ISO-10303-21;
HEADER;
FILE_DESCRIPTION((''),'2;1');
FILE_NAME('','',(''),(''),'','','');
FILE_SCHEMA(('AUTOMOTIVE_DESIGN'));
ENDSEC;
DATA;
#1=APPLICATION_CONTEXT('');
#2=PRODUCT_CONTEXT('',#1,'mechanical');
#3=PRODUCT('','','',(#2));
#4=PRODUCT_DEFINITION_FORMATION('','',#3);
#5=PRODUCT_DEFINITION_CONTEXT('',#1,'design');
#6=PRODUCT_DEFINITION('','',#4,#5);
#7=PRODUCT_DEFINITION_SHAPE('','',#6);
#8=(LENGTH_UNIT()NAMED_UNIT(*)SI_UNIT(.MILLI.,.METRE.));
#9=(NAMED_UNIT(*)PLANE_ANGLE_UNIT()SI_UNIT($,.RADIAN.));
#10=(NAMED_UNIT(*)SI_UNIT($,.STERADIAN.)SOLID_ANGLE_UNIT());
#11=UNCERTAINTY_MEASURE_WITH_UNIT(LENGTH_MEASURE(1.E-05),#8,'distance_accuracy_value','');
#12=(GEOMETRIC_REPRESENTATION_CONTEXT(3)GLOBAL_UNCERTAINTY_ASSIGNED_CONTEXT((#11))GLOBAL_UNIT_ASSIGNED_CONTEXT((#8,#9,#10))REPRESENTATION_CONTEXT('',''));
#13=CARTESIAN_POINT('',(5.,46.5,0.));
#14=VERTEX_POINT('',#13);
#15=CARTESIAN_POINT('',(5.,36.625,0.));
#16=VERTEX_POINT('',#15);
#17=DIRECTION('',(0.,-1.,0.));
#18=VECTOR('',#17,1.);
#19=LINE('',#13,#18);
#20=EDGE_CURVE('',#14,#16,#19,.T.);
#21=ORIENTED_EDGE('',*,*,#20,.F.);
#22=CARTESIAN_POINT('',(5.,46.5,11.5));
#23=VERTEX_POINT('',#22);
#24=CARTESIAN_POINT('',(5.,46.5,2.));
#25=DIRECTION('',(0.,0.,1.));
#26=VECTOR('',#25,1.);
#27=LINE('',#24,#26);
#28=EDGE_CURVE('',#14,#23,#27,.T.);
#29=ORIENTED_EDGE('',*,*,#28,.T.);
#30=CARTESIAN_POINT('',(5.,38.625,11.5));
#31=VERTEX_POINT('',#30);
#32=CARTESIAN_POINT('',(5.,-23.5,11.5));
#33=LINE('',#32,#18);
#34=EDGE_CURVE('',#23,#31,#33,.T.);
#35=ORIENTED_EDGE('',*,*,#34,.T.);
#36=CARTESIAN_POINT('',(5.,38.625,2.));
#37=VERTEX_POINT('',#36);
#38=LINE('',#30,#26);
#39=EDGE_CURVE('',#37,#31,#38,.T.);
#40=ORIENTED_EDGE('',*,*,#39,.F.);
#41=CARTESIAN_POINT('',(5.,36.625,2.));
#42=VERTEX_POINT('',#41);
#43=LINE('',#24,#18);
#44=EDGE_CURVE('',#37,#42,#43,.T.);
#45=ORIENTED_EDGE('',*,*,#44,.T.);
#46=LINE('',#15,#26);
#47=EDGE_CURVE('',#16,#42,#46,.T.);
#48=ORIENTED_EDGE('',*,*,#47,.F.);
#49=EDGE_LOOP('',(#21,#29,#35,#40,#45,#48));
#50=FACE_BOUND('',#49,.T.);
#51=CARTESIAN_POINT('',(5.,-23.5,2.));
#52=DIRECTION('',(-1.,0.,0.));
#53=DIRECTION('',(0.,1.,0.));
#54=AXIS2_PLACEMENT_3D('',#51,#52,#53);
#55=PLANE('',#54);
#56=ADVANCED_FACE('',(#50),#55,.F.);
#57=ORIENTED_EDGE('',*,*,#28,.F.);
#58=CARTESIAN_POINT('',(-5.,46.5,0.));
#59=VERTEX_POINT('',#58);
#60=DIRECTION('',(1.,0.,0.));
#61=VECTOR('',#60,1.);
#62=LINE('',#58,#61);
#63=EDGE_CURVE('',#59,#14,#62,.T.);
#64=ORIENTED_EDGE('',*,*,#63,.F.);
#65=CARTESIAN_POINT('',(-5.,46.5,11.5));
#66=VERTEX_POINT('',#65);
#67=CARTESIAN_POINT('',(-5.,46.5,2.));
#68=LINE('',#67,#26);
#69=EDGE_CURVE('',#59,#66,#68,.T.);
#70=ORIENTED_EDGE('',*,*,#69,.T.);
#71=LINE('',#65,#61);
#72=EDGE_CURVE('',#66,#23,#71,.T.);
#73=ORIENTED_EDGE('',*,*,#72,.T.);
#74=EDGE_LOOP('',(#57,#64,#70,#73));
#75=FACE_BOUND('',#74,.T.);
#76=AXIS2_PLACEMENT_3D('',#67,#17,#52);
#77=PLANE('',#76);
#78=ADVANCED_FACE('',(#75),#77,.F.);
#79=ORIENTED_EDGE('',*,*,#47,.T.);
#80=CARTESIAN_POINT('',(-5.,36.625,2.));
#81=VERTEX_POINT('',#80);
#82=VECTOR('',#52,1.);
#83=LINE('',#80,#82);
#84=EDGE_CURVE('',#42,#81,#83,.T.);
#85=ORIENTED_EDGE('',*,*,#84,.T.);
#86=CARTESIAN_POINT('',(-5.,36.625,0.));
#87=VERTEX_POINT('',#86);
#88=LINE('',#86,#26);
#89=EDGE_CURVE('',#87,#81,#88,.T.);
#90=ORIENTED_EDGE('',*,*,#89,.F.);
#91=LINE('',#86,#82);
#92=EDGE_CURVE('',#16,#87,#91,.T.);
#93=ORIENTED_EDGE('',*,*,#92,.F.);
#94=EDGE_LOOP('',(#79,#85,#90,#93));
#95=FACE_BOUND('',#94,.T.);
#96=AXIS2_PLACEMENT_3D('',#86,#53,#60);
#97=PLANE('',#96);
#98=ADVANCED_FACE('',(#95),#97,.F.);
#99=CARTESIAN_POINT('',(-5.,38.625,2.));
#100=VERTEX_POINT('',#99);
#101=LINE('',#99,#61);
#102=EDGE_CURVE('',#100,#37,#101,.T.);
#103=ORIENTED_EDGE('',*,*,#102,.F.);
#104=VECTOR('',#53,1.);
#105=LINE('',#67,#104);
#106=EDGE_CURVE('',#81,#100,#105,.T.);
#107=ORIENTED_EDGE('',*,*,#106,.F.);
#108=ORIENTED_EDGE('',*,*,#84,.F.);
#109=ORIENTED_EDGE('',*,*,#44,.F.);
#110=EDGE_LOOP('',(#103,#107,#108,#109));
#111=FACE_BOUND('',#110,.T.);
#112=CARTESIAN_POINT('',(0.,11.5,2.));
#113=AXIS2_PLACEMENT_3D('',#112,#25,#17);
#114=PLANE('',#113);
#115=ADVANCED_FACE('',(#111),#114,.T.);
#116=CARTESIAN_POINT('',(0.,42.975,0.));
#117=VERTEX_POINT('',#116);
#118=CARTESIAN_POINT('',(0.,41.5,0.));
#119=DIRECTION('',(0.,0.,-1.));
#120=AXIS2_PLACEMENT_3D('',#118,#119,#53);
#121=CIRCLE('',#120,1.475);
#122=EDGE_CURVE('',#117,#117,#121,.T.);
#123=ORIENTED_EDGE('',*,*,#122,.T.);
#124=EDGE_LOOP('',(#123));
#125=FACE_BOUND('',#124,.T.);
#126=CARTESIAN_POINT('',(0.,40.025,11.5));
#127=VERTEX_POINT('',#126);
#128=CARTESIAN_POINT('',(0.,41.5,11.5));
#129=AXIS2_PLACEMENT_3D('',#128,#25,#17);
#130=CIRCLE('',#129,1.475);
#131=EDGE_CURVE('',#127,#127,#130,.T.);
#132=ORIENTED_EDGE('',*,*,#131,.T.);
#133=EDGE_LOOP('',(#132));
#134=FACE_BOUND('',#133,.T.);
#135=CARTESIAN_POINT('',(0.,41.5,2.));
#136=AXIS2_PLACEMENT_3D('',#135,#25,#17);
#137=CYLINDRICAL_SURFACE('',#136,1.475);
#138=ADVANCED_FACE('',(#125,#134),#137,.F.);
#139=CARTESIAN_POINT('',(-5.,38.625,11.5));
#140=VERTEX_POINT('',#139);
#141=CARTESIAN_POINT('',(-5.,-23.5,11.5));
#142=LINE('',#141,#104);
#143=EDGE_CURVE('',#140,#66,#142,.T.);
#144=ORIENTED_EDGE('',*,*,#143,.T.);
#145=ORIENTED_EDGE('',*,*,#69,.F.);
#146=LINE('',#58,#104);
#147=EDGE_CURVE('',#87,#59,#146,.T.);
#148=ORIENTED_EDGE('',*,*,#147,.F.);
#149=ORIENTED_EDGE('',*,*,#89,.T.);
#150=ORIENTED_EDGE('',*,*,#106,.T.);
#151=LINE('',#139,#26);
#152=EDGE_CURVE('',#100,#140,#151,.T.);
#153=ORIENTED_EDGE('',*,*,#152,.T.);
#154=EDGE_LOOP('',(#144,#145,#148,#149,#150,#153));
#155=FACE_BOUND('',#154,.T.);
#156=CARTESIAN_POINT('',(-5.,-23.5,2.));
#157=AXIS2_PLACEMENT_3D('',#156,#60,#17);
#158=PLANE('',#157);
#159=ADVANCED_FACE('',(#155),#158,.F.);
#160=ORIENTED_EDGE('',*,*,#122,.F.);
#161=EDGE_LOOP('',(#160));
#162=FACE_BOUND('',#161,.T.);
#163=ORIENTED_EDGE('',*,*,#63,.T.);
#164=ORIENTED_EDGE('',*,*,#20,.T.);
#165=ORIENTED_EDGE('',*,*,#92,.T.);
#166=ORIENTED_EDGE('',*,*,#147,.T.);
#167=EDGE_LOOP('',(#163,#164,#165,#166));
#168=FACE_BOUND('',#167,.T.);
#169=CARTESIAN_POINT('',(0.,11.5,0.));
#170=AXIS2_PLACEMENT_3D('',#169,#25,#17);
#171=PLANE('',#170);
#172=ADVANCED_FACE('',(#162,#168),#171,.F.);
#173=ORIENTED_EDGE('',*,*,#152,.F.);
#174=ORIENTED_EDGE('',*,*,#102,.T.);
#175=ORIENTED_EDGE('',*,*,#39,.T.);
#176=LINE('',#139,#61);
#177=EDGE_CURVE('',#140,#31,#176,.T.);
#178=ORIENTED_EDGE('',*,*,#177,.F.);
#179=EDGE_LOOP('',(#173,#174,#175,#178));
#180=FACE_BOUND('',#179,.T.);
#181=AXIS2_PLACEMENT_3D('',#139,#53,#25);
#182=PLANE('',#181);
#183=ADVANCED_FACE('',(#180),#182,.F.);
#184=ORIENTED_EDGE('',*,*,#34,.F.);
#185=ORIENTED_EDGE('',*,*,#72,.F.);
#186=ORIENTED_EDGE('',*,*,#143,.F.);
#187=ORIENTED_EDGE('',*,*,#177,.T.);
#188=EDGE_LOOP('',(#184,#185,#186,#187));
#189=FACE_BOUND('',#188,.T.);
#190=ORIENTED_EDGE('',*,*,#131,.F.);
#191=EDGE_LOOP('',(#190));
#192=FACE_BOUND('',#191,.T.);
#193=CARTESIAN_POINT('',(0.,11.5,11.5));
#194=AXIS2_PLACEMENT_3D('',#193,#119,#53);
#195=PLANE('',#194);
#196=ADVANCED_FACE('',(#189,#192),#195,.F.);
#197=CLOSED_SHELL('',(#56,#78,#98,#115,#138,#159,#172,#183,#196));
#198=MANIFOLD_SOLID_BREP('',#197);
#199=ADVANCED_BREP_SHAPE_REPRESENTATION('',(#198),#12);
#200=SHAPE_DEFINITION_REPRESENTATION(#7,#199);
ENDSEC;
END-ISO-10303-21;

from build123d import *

# Parameters (mm, degrees)
SKETCH1_W                    = 10
SKETCH1_H                    = 70
BOSS_EXTRUDE1_DEPTH          = 9.5
SKETCH2_W                    = 54.25
SKETCH2_H                    = 9.5
CUT_EXTRUDE1_DEPTH           = 38.619808612
SKETCH3_R                    = 1.475
CUT_EXTRUDE2_DEPTH           = 37.609425016
SKETCH4_W                    = 10
SKETCH4_H                    = 9.875
SKETCH4_R                    = 1.475
BOSS_EXTRUDE2_DEPTH          = 2
BODY_DELETE_KEEP_2_OUTLINE_W = 10
BODY_DELETE_KEEP_2_OUTLINE_H = 9.875
BODY_DELETE_KEEP_2_OUTLINE_R = 1.475
BODY_DELETE_KEEP_2_DEPTH     = 11.5
BODY_MOVE_COPY1_ANGLE        = 90


with BuildPart() as part:
    # Sketch1 → Boss-Extrude1 (new body)
    with BuildSketch(Plane(origin=(0, 0, 0), x_dir=(1, 0, 0), z_dir=(0, 1, 0))):
        Rectangle(SKETCH1_W, SKETCH1_H)
    extrude(amount=BOSS_EXTRUDE1_DEPTH)

    # Sketch2 → Cut-Extrude1 (cut, through all)
    with BuildSketch(Plane(origin=(5, 0, 0), x_dir=(0, 0, -1), z_dir=(1, 0, 0))):
        with Locations((0, 4.75)):
            Rectangle(SKETCH2_W, SKETCH2_H)
    extrude(amount=-CUT_EXTRUDE1_DEPTH, mode=Mode.SUBTRACT)


with BuildPart() as cut_extrude1_piece_1:
    # of the separate pieces the step leaves, piece 1, a body of its own (cut_extrude1_pieces)
    add(part.part.solids().sort_by_distance((-5, 0, 35))[0])


with BuildPart() as cut_extrude1_piece_2:
    # of the separate pieces the step leaves, piece 2, a body of its own (cut_extrude1_pieces)
    add(part.part.solids().sort_by_distance((-5, 0, -35))[0])


with BuildPart() as cut_extrude2_tool:
    # Sketch3 → Cut-Extrude2 (new, through all)
    with BuildSketch(Plane.XZ):
        with Locations(Location((0, 30, 0), (0, 0, 270))):
            Circle(SKETCH3_R)
        with Locations(Location((0, -30, 0), (0, 0, 270))):
            Circle(SKETCH3_R)
    extrude(amount=-CUT_EXTRUDE2_DEPTH)


with BuildPart() as cut_extrude1_piece_1_1:
    add(cut_extrude1_piece_1.part)

    # Cut-Extrude2: cut by cut_extrude2_tool
    add(cut_extrude2_tool.part, mode=Mode.SUBTRACT)



with BuildPart() as cut_extrude1_piece_2_1:
    add(cut_extrude1_piece_2.part)

    # Cut-Extrude2: cut by cut_extrude2_tool
    add(cut_extrude2_tool.part, mode=Mode.SUBTRACT)


with BuildPart() as cut_extrude1_piece_1_2:
    add(cut_extrude1_piece_1_1.part)

    add(cut_extrude1_piece_2_1.part)  # Boss-Extrude2 merges Cut-Extrude1 piece 2
    # Sketch4 → Boss-Extrude2 (add)
    # profile 1 of 2: a face of its own
    with BuildSketch(Plane(origin=(0, 9.5, 0), x_dir=(1, 0, 0), z_dir=(0, 1, 0))):
        with Locations((0, -30.0625)):
            Rectangle(SKETCH4_W, SKETCH4_H)
        with Locations(Location((0, -30, 0), (0, 0, 90))):
            Circle(SKETCH4_R, mode=Mode.SUBTRACT)
    # profile 2 of 2: a face of its own
    with BuildSketch(Plane(origin=(0, 9.5, 0), x_dir=(1, 0, 0), z_dir=(0, 1, 0))):
        with Locations((0, 30.0625)):
            Rectangle(SKETCH4_W, SKETCH4_H)
        with Locations(Location((0, 30, 0), (0, 0, 90))):
            Circle(SKETCH4_R, mode=Mode.SUBTRACT)
    extrude(amount=BOSS_EXTRUDE2_DEPTH)

    # Body-Delete/Keep 2: read off the stored shape, not the designer's step
    # Body-Delete/Keep 2 outline → Body-Delete/Keep 2 (cut)
    with BuildSketch(Plane(origin=(0, 0, 0), x_dir=(1, 0, 0), z_dir=(0, 1, 0))):
        with Locations((0, 30.0625)):
            Rectangle(BODY_DELETE_KEEP_2_OUTLINE_W, BODY_DELETE_KEEP_2_OUTLINE_H)
        with Locations((0, 30)):
            Circle(BODY_DELETE_KEEP_2_OUTLINE_R, mode=Mode.SUBTRACT)
    extrude(amount=BODY_DELETE_KEEP_2_DEPTH, mode=Mode.SUBTRACT)


with BuildPart() as cut_extrude1_piece_1_3:
    # Body-Move/Copy1: read off the stored shape, not the designer's step
    # Body-Move/Copy1: moved
    add(cut_extrude1_piece_1_2.part.moved(Location((0, -11.5, 11.5))).rotate(Axis((0, 0, 0), (-1, 0, 0)), BODY_MOVE_COPY1_ANGLE))


solid = cut_extrude1_piece_1_3.part
